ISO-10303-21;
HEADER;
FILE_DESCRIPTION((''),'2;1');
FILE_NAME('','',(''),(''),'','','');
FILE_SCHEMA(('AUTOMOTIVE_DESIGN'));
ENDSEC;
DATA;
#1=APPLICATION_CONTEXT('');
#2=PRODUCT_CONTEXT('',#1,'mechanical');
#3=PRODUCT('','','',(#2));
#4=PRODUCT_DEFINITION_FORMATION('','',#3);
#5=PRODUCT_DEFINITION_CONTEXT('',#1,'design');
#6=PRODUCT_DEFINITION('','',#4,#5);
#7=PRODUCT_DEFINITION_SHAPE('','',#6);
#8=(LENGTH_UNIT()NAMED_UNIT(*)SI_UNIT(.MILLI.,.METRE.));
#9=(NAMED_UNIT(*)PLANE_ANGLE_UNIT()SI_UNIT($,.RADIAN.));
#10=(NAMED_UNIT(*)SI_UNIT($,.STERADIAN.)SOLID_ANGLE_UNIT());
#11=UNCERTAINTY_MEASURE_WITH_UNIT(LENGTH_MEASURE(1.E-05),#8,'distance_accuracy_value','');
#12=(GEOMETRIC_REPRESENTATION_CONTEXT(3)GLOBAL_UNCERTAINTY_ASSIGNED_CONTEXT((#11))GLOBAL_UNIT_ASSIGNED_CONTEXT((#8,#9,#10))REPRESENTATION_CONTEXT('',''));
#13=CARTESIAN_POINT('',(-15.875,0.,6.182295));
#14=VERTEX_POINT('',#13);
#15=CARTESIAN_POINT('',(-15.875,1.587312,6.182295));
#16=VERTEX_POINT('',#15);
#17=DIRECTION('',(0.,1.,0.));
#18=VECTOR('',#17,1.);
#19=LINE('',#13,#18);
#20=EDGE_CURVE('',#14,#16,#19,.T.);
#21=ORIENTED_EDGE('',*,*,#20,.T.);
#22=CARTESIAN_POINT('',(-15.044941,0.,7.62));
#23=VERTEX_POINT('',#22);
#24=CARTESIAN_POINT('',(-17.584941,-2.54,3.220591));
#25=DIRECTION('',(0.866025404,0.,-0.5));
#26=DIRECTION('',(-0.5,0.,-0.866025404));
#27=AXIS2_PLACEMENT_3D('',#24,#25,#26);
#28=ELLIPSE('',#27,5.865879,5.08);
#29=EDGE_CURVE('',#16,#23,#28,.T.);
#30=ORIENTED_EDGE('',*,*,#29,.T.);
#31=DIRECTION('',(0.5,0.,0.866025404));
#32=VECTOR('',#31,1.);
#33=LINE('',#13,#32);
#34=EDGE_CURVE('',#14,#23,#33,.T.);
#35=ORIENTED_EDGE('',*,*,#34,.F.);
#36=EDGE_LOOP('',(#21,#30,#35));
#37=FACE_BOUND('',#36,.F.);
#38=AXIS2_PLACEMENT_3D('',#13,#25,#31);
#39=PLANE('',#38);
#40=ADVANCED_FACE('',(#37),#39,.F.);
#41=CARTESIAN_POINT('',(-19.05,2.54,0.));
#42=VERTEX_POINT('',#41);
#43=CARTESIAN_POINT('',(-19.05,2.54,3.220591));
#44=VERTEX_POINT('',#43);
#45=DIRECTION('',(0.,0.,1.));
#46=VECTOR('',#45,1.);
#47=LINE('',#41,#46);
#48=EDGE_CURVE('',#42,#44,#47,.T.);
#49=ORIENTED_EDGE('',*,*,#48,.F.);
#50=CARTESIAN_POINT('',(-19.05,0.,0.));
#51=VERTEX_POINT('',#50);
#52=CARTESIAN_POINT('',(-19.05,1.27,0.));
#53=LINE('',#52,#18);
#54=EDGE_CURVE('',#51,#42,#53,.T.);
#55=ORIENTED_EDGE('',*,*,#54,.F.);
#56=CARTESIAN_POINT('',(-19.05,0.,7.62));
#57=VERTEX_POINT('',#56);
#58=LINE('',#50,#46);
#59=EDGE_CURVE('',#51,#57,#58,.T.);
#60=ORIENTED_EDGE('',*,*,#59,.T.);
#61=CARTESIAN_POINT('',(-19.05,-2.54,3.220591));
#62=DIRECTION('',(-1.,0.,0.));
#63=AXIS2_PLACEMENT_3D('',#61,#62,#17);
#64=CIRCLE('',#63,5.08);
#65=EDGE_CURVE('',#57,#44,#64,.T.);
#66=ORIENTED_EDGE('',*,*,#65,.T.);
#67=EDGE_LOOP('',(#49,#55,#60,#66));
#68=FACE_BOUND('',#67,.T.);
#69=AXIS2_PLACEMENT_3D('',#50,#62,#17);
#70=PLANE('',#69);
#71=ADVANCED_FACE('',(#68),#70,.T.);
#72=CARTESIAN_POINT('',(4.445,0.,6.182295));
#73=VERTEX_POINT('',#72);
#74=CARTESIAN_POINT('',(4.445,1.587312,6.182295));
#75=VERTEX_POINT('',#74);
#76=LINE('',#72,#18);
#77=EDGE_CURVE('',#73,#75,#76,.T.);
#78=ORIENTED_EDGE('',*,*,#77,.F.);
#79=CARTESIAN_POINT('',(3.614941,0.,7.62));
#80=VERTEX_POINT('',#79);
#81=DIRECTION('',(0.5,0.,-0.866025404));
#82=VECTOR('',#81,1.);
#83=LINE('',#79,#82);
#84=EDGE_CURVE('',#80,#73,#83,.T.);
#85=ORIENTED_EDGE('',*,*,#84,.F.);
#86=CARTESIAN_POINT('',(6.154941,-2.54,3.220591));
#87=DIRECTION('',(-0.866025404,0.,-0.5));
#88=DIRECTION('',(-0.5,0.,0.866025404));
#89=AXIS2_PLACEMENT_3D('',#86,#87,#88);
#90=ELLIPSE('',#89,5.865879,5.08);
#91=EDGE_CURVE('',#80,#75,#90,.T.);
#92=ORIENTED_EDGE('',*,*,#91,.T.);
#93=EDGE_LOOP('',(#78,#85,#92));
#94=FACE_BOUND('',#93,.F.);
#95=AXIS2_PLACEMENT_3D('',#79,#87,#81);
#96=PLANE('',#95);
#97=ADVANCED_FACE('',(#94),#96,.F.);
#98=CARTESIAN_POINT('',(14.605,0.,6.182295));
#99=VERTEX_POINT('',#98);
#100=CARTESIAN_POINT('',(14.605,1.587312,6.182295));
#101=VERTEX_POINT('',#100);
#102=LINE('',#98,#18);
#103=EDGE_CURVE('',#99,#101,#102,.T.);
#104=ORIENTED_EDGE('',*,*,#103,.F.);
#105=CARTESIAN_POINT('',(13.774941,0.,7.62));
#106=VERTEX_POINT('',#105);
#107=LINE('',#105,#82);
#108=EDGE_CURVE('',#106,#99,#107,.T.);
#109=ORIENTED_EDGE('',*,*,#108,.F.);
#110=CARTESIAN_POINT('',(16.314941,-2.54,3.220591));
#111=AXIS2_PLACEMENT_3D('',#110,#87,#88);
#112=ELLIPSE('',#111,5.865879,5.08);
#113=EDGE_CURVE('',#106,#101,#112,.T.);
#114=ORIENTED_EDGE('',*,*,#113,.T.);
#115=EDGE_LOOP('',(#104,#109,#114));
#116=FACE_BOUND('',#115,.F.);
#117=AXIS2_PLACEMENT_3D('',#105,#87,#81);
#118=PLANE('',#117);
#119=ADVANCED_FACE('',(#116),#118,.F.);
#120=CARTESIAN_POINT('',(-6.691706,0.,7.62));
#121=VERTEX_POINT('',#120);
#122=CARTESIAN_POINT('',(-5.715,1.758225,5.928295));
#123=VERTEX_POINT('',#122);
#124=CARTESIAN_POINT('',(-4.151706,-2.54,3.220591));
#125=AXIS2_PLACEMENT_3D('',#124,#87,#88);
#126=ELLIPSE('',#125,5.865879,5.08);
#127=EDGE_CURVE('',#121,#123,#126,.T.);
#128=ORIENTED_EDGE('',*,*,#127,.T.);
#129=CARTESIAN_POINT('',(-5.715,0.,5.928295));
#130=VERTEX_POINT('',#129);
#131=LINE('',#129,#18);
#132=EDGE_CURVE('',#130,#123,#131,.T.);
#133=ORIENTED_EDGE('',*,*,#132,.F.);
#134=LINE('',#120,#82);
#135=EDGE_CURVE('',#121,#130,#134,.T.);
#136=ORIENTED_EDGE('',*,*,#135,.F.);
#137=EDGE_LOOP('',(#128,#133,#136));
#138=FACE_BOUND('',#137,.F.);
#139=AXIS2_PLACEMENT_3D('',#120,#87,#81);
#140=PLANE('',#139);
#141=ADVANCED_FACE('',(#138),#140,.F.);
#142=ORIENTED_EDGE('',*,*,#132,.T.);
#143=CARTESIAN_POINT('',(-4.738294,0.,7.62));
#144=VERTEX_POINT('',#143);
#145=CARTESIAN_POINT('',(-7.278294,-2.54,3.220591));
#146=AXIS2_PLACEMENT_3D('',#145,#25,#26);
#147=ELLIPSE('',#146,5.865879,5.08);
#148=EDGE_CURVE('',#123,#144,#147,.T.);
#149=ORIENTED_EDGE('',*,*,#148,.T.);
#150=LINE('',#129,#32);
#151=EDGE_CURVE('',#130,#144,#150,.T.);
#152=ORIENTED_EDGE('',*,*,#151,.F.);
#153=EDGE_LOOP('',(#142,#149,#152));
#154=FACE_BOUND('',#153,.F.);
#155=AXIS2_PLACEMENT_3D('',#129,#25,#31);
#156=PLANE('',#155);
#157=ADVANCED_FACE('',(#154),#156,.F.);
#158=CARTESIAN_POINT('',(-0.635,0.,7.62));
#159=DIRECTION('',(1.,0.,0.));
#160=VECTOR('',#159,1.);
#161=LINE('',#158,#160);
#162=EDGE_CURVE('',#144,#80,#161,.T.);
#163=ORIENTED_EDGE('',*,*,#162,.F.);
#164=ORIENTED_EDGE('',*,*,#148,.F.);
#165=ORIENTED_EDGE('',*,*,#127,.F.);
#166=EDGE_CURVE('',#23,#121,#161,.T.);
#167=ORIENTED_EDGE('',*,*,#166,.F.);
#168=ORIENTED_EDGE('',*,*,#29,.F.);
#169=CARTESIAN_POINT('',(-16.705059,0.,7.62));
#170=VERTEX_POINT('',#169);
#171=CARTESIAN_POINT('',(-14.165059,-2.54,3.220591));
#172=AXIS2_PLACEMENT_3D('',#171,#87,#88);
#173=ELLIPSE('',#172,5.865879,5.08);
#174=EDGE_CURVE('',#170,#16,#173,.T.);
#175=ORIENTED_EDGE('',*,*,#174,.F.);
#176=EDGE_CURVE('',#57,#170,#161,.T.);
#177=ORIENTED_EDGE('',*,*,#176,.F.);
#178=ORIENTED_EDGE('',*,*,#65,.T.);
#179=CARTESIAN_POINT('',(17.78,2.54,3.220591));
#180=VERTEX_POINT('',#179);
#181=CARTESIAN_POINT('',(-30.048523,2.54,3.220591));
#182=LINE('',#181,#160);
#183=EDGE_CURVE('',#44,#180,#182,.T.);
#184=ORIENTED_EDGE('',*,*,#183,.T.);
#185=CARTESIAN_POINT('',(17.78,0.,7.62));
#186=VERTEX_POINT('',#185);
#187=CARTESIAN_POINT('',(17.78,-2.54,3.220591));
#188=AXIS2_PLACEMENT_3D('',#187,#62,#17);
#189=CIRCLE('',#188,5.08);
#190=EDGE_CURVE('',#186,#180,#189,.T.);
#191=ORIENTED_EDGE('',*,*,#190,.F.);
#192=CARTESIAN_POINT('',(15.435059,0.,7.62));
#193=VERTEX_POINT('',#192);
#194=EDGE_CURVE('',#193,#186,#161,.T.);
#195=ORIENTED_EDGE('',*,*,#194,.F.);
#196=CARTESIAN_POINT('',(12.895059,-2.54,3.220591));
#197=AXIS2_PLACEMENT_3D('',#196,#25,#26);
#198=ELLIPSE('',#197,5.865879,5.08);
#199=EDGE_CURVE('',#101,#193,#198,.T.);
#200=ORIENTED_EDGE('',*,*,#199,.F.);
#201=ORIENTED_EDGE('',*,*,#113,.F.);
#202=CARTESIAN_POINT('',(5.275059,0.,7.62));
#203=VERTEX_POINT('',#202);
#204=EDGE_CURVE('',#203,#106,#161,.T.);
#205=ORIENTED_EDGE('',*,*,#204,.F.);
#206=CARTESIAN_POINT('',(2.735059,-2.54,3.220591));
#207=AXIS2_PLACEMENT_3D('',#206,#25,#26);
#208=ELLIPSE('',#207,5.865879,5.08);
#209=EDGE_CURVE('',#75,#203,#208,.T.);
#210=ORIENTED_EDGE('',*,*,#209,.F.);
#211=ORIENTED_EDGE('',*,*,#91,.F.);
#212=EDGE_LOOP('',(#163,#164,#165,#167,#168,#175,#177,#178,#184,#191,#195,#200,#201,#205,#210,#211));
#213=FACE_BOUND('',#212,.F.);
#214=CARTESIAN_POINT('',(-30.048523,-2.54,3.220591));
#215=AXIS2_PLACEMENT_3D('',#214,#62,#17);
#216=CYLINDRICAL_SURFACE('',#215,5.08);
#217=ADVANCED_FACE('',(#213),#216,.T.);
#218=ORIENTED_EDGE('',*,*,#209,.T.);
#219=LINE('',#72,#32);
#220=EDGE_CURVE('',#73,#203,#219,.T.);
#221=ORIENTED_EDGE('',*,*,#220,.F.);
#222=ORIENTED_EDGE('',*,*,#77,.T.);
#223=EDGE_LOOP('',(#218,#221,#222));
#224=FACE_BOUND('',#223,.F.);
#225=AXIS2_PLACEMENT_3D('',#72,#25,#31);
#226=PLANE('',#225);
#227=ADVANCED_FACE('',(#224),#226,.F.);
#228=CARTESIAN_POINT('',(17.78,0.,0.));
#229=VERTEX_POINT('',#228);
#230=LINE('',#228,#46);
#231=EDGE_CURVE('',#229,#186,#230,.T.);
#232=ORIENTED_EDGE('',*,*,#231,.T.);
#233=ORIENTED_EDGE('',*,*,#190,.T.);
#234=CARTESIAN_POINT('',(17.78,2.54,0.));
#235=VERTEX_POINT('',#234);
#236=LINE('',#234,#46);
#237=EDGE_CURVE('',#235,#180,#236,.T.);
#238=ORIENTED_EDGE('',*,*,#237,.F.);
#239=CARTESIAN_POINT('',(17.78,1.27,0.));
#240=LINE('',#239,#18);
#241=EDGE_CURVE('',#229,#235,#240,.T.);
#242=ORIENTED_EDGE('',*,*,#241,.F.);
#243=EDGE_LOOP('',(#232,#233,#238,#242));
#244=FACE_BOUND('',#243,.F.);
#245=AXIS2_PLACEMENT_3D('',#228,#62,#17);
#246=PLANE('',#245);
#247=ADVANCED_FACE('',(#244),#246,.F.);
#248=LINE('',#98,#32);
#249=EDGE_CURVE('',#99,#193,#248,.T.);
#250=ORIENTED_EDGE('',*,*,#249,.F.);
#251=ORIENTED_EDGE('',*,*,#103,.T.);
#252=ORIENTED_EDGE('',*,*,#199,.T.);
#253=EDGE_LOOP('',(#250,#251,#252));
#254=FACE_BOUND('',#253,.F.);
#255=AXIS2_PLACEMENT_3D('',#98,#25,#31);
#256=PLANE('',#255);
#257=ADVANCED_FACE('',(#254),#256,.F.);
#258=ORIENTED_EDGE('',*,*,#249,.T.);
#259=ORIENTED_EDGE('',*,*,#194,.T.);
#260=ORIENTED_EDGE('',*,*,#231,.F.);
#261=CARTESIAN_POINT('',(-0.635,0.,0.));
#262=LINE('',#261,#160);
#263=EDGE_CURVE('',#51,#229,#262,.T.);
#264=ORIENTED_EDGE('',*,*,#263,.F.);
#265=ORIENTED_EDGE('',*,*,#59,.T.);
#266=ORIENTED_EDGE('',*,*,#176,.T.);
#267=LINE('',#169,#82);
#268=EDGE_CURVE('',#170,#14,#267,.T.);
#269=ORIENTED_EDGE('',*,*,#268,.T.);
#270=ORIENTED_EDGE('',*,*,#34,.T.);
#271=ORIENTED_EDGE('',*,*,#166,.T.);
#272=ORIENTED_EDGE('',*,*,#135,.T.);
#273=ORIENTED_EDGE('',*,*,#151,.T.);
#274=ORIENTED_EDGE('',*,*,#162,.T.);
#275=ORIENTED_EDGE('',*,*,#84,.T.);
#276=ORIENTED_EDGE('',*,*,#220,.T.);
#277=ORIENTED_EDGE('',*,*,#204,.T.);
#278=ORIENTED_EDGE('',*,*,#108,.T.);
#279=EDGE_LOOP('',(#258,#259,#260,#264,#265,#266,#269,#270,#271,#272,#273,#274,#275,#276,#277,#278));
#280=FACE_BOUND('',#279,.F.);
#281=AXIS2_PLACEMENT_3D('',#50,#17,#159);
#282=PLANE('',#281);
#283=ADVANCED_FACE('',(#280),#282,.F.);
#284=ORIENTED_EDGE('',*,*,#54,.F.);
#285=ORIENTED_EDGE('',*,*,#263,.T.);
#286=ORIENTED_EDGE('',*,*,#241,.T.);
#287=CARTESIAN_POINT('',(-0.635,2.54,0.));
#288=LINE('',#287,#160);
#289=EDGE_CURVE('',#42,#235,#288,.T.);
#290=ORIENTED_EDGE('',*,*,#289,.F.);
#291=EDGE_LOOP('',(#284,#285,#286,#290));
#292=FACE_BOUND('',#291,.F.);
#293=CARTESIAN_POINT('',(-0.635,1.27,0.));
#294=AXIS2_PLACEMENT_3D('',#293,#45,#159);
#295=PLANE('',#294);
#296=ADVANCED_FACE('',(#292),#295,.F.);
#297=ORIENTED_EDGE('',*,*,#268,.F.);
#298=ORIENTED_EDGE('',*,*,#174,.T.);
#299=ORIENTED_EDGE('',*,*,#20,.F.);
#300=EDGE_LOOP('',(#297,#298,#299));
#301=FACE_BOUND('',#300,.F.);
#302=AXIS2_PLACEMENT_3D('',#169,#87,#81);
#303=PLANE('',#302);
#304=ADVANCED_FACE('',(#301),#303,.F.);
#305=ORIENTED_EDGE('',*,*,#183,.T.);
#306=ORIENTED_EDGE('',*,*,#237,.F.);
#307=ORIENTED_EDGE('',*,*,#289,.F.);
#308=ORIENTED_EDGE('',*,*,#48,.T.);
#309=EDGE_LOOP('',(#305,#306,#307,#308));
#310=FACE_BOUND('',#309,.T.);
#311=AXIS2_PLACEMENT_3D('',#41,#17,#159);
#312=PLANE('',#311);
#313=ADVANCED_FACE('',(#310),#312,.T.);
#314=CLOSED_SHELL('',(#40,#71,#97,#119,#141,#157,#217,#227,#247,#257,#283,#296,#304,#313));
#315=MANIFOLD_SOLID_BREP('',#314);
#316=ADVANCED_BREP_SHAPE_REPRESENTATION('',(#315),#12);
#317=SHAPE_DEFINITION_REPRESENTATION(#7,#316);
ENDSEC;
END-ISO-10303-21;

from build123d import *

# Parameters (mm, degrees)
F0_W        = 36.83
F0_H        = 2.54
F1_DEPTH    = 7.62
F3_T1_DEPTH = 58.8270452561
F4_DEPTH    = 25.4


# Not quite as in the source:
# - a fillet or chamfer that OpenCascade refuses, or shapes differently, is made with other operations: its cross-section is extruded or revolved along the edge and cut away or added


with BuildPart() as f1:
    # F0 (on Top) → F1 (new body)
    with BuildSketch(Plane.XY):
        with Locations((-0.635, 1.27)):
            Rectangle(F0_W, F0_H)
    extrude(amount=F1_DEPTH)

    # F3: fillet of radius 5.08 on 1 edges, made by hand

    # F3_s2 → F3_t1 (cut)
    with BuildSketch(Plane.YZ.offset(-30.0485226281)):
        with BuildLine():
            ThreePointArc((2.54, 3.2205909488), (1.8594090512, 5.7605909488), (0, 7.62))
            Line((0, 7.62), (2.54, 7.62))
            Line((2.54, 7.62), (2.54, 3.2205909488))
        make_face()
    extrude(amount=F3_T1_DEPTH, mode=Mode.SUBTRACT)

    # F2 (on face) → F4 (cut)
    with BuildSketch(Plane.XZ):
        Polygon((-15.875, 6.1822954744), (-15.0449409051, 7.62), (-16.7050590949, 7.62), align=None)
        Polygon((-4.7382939367, 7.62), (-6.6917060633, 7.62), (-5.715, 5.9282954744), align=None)
        Polygon((5.2750590949, 7.62), (3.6149409051, 7.62), (4.445, 6.1822954744), align=None)
        Polygon((15.4350590949, 7.62), (13.7749409051, 7.62), (14.605, 6.1822954744), align=None)
    extrude(amount=-F4_DEPTH, mode=Mode.SUBTRACT)


solid = f1.part
